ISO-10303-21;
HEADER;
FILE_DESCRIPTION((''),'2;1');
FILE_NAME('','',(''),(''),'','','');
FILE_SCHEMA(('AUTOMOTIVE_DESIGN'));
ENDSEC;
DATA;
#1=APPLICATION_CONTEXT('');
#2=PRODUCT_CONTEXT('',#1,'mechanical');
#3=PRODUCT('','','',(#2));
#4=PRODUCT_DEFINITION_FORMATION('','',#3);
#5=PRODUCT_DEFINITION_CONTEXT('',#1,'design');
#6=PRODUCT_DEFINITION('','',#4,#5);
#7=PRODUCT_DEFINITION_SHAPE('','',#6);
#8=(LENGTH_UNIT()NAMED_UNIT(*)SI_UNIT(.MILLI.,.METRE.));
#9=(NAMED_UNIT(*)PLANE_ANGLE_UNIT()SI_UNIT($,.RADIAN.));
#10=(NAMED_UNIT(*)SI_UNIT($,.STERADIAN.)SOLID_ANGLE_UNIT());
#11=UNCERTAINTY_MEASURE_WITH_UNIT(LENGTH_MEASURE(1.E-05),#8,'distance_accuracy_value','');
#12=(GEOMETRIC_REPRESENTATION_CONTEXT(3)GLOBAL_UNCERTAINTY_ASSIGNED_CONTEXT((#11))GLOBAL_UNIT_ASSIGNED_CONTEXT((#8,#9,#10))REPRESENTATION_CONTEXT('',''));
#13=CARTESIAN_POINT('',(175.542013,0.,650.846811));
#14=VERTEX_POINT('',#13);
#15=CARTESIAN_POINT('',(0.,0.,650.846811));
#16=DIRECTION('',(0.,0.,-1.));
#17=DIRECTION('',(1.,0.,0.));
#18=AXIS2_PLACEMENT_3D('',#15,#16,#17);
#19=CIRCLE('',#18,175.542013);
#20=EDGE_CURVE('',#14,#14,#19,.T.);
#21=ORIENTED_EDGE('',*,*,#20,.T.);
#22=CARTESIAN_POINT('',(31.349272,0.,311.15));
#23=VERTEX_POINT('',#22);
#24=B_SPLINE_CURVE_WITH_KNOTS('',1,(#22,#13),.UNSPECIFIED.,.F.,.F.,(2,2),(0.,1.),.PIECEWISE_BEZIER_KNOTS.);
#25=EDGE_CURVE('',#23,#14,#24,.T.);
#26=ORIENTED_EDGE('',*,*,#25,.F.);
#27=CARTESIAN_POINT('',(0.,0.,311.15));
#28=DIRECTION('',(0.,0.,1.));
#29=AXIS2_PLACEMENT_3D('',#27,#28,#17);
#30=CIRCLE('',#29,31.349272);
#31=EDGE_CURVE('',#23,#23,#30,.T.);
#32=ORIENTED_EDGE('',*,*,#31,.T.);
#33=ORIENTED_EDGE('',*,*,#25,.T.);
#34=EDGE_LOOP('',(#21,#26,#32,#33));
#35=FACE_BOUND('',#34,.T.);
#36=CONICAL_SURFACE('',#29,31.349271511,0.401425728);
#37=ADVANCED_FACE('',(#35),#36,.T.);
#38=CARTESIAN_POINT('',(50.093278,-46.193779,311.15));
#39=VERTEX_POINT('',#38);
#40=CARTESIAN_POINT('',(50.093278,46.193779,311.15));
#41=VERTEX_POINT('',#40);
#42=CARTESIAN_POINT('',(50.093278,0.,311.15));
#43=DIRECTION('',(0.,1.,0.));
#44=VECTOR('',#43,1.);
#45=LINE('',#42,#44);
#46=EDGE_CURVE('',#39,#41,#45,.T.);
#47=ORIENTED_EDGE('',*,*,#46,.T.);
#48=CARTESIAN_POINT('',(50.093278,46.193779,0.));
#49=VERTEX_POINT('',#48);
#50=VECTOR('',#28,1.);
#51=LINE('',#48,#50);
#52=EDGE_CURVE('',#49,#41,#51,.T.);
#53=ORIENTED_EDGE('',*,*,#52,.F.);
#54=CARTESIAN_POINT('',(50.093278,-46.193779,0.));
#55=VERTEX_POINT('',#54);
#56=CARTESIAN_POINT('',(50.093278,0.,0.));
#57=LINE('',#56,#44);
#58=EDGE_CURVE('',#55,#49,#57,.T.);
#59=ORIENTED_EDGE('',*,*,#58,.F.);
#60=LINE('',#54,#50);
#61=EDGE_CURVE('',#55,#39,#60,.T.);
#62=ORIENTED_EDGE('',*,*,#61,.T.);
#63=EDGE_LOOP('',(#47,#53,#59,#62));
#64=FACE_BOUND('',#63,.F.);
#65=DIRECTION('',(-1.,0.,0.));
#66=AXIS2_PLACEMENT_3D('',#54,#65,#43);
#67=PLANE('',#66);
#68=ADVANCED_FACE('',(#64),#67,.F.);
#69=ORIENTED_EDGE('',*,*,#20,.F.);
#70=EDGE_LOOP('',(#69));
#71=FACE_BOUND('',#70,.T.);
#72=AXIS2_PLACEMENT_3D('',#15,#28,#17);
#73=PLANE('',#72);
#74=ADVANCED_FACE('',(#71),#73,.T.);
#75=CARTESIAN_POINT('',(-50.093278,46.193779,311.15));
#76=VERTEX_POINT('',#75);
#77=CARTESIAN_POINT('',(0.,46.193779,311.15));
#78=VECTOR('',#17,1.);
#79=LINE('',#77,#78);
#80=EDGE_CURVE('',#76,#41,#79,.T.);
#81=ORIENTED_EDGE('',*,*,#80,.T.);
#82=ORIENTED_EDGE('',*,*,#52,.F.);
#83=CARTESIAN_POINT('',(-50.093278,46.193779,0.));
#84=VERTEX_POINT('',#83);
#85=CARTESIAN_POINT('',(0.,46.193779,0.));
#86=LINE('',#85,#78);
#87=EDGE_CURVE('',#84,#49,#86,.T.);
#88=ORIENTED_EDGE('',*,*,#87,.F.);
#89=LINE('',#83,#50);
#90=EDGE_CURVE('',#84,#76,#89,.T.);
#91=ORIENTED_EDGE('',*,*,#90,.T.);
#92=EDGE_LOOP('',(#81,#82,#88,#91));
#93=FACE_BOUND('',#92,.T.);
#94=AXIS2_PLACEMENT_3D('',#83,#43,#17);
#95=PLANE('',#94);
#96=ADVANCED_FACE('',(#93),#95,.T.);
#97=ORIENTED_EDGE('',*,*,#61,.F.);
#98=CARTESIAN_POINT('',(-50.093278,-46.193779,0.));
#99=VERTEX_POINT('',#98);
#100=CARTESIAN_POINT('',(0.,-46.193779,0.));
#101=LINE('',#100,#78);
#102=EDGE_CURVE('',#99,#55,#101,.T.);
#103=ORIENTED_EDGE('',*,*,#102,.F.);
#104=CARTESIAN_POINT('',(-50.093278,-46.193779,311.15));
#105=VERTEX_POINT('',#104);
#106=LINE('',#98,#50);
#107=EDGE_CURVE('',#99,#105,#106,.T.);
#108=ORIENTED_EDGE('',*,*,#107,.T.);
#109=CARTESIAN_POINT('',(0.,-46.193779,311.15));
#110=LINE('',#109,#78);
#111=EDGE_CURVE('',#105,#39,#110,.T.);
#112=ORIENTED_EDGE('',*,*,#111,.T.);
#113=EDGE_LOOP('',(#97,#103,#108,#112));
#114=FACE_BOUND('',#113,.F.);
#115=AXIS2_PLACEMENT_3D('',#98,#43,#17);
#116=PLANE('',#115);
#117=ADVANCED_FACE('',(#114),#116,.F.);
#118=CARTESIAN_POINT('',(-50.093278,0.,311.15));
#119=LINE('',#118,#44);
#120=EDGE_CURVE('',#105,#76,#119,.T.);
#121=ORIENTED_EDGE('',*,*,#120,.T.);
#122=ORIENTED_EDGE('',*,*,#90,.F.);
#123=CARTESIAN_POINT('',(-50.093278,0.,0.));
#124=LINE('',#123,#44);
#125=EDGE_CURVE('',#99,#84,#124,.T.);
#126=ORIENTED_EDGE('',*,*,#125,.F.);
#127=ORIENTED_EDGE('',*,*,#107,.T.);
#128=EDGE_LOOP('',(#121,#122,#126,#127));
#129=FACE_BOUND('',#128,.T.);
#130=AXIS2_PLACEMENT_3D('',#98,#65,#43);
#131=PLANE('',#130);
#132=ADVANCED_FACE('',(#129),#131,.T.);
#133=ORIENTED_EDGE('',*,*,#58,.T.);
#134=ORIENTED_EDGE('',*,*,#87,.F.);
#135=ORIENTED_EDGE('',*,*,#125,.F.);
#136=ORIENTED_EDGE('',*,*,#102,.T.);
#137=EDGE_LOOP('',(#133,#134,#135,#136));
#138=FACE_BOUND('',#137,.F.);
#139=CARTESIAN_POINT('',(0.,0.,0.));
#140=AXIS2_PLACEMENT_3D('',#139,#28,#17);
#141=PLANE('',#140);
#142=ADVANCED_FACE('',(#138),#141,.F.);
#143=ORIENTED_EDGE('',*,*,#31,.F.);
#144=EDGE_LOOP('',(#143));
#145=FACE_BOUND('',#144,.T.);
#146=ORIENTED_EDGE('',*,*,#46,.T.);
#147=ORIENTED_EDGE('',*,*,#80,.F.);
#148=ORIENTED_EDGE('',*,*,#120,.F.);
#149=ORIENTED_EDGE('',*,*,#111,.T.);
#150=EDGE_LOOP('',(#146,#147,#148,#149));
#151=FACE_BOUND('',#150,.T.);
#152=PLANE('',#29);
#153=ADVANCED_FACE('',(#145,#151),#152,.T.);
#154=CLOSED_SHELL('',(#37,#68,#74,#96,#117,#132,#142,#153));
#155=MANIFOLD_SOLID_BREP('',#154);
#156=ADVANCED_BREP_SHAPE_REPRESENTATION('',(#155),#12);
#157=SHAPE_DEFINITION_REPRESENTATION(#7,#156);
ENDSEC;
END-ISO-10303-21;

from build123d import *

# Parameters (mm, degrees)
F0_W     = 100.1865565777
F0_H     = 92.3875570297
F1_DEPTH = 311.15
F2_R     = 31.3492715111
F3_DEPTH = 339.6968106
F3_TAPER = -23


# Not quite as in the source:
# - an extrude ends at something that could not be found from the text; its depth is read off the source's solid


with BuildPart() as f1:
    # F0 (on Top) → F1 (new body)
    with BuildSketch(Plane.XY):
        Rectangle(F0_W, F0_H)
    extrude(amount=F1_DEPTH)

    # F2 (on face) → F3 (join, through all)
    with BuildSketch(Plane.XY.offset(311.15)):
        Circle(F2_R)
    extrude(amount=F3_DEPTH, taper=F3_TAPER)


solid = f1.part
